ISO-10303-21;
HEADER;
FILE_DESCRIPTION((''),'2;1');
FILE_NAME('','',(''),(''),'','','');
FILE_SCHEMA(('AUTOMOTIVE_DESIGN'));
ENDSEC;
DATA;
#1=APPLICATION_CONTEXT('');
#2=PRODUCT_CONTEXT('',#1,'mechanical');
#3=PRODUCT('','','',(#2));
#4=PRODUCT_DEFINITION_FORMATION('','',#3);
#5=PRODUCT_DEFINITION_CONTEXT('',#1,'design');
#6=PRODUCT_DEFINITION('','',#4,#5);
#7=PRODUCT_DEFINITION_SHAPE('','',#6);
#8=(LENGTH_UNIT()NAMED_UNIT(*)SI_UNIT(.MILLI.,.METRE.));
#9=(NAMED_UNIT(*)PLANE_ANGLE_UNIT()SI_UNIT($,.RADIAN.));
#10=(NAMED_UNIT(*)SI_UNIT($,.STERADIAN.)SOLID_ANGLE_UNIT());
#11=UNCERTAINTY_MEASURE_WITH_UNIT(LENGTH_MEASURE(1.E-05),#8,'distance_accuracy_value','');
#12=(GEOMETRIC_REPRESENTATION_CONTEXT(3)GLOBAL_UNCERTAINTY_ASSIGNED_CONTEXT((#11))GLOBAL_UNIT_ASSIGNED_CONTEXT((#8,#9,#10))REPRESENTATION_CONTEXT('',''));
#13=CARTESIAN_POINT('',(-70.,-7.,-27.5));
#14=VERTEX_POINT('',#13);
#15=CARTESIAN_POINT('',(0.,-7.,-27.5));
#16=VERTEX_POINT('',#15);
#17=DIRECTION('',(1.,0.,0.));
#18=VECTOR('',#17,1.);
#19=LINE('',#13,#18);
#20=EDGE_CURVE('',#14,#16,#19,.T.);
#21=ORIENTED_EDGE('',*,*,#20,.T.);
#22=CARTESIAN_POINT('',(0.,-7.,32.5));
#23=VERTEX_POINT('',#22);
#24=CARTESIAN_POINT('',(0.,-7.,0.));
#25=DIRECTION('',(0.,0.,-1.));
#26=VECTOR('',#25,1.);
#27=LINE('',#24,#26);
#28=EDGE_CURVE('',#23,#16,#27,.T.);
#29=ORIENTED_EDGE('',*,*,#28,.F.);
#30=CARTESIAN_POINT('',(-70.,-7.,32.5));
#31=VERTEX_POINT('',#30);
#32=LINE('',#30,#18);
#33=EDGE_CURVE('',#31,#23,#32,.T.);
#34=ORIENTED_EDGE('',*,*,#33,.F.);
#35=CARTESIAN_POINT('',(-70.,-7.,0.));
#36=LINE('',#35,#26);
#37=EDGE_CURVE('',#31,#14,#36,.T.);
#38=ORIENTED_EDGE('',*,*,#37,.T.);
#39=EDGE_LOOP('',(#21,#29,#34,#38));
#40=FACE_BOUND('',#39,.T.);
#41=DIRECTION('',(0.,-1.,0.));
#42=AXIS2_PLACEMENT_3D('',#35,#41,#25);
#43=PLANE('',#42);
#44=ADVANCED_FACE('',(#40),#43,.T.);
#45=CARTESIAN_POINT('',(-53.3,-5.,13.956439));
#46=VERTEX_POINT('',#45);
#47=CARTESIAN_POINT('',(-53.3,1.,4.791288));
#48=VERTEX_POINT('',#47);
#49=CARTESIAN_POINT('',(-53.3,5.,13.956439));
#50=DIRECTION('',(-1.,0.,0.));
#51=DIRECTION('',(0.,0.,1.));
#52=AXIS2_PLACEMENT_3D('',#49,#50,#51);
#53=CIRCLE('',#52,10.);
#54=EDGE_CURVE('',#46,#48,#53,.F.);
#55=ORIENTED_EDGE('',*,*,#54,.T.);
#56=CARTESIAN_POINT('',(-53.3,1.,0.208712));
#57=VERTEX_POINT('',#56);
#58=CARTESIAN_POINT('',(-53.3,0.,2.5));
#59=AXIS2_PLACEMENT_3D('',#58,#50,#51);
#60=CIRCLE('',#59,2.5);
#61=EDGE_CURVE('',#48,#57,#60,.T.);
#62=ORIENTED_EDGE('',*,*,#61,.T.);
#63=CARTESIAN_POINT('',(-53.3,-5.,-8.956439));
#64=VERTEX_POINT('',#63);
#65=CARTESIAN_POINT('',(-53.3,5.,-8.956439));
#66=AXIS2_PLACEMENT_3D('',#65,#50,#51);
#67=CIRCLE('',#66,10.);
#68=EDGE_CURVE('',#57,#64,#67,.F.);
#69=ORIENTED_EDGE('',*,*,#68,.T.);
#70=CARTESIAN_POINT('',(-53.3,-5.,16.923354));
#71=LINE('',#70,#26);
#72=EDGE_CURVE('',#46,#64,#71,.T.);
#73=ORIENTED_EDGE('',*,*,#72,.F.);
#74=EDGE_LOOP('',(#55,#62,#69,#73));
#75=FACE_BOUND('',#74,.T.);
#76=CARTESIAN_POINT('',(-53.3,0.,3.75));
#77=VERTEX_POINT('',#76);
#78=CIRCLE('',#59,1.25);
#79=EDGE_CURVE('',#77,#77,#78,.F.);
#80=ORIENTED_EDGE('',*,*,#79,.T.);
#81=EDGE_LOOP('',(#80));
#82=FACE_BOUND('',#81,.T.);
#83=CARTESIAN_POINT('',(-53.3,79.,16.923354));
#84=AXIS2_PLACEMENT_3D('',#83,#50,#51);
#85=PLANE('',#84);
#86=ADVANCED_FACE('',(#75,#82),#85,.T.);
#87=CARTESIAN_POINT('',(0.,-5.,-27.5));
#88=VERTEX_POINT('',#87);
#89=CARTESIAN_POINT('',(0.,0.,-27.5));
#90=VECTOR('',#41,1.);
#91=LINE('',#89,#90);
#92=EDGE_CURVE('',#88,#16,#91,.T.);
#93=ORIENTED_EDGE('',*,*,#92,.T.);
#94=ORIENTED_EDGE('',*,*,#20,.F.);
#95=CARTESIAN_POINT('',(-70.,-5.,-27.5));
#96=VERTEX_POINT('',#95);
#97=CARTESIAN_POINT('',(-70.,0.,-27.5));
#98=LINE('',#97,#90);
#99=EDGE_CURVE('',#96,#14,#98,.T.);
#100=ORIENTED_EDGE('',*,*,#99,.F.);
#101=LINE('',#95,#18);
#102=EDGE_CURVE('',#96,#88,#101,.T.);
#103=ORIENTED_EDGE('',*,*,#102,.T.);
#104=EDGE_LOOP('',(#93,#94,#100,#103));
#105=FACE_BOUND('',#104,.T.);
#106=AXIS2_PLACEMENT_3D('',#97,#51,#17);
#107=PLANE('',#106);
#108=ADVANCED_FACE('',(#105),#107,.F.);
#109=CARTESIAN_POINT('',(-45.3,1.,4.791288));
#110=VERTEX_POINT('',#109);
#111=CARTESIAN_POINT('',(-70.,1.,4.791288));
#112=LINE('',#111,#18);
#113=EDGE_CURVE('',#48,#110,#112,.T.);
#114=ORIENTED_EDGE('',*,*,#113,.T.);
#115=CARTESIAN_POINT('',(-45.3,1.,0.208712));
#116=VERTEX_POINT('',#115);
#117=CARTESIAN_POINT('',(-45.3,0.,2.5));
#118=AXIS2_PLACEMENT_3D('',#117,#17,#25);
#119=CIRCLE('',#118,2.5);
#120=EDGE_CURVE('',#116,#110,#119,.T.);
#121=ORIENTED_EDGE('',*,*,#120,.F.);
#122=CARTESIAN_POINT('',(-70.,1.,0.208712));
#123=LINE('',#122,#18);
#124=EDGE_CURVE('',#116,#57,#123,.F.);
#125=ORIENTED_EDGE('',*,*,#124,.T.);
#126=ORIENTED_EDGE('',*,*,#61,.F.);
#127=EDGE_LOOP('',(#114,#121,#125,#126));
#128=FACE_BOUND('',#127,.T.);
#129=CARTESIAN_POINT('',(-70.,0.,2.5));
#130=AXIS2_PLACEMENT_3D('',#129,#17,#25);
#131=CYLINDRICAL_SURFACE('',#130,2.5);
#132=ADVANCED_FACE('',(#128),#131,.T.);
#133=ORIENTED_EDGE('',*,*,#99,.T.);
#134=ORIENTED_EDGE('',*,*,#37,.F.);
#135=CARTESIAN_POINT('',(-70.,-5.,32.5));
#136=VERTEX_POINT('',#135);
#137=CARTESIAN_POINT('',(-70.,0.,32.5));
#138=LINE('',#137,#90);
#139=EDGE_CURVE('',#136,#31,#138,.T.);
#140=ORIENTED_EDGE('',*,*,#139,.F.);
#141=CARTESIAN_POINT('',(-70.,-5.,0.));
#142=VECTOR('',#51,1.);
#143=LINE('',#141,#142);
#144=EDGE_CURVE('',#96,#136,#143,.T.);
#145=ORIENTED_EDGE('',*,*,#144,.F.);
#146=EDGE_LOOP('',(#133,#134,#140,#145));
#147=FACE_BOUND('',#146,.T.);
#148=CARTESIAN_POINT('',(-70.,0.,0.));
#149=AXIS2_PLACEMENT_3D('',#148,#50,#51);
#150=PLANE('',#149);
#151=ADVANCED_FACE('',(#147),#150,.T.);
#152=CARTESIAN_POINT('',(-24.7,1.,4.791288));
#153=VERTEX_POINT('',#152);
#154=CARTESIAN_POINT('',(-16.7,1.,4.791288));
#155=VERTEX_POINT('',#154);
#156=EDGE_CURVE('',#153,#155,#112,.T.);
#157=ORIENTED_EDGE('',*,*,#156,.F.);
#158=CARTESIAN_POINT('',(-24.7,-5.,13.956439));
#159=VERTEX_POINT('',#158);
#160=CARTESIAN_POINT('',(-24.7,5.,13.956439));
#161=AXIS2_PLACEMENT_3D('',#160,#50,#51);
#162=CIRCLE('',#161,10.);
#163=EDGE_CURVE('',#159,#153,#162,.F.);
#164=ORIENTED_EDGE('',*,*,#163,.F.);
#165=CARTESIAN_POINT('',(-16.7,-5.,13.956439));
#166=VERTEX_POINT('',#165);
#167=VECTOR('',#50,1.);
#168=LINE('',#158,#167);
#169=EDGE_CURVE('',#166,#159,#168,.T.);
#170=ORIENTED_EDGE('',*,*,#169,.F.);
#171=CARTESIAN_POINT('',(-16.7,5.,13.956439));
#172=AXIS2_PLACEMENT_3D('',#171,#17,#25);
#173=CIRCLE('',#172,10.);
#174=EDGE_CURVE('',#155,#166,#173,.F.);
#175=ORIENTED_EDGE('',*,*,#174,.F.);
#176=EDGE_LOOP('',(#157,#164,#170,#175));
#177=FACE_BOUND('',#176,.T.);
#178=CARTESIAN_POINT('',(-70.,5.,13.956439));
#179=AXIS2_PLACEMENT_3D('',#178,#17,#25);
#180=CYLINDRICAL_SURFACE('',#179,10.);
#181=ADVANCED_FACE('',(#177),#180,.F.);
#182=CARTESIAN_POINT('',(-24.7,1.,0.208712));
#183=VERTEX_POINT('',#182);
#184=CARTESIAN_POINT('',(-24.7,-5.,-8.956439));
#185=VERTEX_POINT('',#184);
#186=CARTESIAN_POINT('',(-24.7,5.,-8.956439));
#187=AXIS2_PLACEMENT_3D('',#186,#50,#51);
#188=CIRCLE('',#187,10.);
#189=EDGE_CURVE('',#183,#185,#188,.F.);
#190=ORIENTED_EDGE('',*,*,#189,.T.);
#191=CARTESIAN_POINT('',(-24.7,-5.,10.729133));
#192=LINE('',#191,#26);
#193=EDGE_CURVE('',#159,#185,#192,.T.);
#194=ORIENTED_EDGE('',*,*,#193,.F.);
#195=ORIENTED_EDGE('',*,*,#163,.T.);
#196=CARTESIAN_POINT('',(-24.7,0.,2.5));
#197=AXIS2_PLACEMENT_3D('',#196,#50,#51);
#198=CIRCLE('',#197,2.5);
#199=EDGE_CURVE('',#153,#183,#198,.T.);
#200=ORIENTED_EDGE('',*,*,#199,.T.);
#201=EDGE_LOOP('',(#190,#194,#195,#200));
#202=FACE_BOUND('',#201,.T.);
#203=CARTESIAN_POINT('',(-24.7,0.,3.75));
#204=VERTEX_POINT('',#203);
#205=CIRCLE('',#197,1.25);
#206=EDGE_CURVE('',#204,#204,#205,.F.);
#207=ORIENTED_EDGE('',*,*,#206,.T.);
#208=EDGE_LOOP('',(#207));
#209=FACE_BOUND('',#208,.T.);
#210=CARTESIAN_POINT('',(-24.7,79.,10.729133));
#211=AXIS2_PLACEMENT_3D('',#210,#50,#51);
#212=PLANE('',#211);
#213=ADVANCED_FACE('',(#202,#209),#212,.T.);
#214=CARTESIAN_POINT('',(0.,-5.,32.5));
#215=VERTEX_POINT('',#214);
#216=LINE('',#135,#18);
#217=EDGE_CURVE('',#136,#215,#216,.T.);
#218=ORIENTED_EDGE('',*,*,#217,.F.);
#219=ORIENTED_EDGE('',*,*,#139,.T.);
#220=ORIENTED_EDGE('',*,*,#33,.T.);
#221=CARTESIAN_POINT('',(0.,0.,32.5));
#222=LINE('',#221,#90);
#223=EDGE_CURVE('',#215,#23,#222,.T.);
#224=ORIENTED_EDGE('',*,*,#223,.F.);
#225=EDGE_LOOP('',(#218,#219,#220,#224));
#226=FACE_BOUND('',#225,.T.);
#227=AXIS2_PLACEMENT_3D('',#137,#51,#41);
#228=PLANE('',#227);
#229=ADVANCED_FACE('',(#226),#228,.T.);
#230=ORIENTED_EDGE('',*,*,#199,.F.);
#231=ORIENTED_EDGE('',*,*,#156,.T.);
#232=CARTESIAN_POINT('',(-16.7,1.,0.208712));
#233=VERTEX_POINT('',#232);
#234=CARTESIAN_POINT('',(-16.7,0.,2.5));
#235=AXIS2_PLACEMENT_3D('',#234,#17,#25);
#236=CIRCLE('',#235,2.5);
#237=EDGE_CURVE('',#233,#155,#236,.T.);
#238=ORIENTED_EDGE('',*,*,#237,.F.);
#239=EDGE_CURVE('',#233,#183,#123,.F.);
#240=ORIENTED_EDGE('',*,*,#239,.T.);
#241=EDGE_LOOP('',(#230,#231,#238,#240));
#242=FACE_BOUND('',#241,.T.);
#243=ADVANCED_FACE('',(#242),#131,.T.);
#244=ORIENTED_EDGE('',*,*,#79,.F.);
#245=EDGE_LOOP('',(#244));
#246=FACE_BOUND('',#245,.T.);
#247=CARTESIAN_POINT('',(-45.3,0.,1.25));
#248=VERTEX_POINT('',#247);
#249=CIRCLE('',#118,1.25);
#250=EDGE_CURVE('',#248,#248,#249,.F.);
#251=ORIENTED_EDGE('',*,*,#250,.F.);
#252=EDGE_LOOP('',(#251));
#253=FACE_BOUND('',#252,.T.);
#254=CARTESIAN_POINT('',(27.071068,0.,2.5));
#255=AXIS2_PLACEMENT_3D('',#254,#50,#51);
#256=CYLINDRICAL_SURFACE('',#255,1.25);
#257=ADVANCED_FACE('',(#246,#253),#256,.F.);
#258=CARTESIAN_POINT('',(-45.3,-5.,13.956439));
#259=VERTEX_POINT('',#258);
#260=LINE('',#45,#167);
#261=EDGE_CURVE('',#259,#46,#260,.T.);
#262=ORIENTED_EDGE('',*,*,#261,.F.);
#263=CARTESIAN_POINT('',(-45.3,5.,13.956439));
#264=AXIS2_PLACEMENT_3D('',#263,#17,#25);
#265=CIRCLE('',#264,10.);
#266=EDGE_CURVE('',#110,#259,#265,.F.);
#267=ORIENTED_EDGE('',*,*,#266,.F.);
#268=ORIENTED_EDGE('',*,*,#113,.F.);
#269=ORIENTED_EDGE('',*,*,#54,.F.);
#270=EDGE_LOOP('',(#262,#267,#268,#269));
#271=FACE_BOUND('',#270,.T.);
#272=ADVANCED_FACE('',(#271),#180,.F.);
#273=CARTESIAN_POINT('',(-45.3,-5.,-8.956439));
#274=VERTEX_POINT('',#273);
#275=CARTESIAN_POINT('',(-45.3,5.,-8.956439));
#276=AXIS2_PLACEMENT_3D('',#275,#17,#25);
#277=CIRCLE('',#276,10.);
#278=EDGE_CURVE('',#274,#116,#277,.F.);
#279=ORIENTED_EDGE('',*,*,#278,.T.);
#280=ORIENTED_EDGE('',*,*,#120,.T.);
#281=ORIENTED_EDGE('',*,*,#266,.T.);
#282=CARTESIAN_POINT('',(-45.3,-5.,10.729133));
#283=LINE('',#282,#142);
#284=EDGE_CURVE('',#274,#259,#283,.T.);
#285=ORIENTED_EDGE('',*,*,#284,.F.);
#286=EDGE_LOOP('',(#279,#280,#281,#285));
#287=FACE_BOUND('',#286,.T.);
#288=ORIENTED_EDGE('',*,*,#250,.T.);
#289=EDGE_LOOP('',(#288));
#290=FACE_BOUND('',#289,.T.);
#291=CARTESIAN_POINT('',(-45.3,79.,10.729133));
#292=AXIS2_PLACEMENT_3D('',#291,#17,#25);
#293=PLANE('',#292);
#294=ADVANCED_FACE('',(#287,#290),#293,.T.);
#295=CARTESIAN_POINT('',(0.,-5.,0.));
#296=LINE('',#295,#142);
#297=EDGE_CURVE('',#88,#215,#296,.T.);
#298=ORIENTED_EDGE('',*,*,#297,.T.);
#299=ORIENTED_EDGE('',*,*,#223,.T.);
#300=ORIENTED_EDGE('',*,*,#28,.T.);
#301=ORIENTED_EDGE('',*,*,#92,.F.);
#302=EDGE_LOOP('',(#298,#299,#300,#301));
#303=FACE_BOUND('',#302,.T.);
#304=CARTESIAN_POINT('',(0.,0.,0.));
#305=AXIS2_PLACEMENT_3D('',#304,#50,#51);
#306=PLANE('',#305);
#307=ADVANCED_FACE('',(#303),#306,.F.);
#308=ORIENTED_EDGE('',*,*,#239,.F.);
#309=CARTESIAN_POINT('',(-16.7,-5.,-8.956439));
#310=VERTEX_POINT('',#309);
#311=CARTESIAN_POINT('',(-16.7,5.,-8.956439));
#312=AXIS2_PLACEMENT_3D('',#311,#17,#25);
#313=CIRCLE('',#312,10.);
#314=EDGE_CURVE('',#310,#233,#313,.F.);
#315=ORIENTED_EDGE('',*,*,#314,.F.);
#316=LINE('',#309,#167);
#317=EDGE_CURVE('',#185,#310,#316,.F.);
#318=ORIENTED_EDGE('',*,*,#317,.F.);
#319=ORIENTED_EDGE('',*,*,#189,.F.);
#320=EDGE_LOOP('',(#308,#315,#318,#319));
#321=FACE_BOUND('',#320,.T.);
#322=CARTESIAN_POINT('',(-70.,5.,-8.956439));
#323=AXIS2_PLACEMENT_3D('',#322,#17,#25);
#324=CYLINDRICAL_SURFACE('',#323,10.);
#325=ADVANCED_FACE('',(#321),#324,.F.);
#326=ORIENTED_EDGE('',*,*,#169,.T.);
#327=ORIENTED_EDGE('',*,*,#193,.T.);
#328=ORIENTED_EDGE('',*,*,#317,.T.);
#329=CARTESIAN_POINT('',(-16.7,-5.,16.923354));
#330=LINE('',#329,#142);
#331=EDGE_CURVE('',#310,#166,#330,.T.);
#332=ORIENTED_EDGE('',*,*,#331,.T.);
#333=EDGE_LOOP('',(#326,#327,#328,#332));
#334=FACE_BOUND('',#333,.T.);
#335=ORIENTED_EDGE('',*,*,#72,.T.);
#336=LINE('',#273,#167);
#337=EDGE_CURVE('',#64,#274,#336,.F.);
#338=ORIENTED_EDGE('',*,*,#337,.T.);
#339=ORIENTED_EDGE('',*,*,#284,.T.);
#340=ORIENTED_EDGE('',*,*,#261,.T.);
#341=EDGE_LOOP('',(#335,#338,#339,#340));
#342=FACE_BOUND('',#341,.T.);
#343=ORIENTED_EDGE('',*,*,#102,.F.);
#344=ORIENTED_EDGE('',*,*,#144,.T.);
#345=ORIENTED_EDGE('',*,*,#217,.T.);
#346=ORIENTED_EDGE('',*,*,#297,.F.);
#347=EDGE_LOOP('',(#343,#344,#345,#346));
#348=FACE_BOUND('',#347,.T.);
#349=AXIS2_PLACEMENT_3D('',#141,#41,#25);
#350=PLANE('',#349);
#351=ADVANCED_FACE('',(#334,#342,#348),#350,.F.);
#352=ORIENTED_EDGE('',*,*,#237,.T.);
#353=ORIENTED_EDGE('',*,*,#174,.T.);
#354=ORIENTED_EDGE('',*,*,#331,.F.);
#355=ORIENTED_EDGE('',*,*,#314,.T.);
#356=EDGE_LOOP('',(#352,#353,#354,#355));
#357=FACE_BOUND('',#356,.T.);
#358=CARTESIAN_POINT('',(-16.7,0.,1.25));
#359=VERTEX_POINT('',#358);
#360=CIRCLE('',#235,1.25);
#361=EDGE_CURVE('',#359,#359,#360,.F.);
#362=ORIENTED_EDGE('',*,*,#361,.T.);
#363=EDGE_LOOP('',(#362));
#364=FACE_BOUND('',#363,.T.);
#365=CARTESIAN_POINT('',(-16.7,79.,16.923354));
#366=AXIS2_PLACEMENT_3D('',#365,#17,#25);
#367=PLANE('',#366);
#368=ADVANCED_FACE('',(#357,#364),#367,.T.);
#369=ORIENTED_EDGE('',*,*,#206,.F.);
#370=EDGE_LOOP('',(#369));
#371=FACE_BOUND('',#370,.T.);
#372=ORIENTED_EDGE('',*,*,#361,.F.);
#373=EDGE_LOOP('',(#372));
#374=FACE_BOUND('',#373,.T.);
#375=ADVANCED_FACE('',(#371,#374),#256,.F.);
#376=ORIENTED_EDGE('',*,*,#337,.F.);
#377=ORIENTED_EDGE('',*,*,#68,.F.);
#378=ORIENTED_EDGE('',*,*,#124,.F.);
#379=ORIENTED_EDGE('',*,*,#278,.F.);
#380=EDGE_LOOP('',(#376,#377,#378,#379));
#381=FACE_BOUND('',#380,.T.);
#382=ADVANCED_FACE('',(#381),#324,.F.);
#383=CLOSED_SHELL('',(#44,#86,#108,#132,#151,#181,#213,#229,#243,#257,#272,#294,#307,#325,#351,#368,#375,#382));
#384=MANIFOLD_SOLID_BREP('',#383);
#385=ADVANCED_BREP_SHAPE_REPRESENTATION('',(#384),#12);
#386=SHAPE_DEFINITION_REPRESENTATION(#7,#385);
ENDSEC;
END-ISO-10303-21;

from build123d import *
from build123d.topology import SkipClean

# Parameters (mm, degrees)
SKETCH1_W           = 20
SKETCH1_H           = 60
BOSS_EXTRUDE1_DEPTH = 5
SKETCH2_R           = 2.5
SKETCH2_R_2         = 1.25
BOSS_EXTRUDE2_DEPTH = 20
CUT_EXTRUDE1_START  = -29
SKETCH3_R           = 1.25
CUT_EXTRUDE1_DEPTH  = 29
SKETCH4_R           = 2.5
SKETCH4_R_2         = 1.25
BOSS_EXTRUDE3_DEPTH = 20
CUT_EXTRUDE2_START  = -29
SKETCH5_R           = 1.25
CUT_EXTRUDE2_DEPTH  = 29
BOSS_EXTRUDE4_START = 70
SKETCH7_R           = 1.25
BOSS_EXTRUDE4_DEPTH = 70
SKETCH8_W           = 20.6
SKETCH8_H           = 18.256228475
SKETCH8_W_2         = 16.7
SKETCH8_H_2         = 28.46865204
SKETCH8_H_3         = 26.746757763
CUT_EXTRUDE4_DEPTH  = 84
SKETCH9_W           = 45.88716948
SKETCH9_H           = 69.445914147
CUT_EXTRUDE5_DEPTH  = 115
FILLET1_R           = 10


with BuildPart() as part:
    # Sketch1 → Boss-Extrude1 (new body)
    with BuildSketch(Plane.XY):
        with Locations((10, 30)):
            Rectangle(SKETCH1_W, SKETCH1_H)
    extrude(amount=BOSS_EXTRUDE1_DEPTH)

    # Sketch2 → Boss-Extrude2 (add)
    with BuildSketch(Plane(origin=(20, 0, 0), x_dir=(0, 0, -1), z_dir=(1, 0, 0))):
        with Locations((-2.5, 60)):
            Circle(SKETCH2_R)
        with Locations((-2.5, 60)):
            Circle(SKETCH2_R_2, mode=Mode.SUBTRACT)
    extrude(amount=-BOSS_EXTRUDE2_DEPTH)

    # Sketch3 → Cut-Extrude1 (cut)
    with SkipClean():  # the faces are left unmerged after this step: merging them gives an invalid solid
        with BuildSketch(Plane.ZY.offset(CUT_EXTRUDE1_START)):
            with Locations(Location((2.5, 60, 0), (0, 0, 180))):
                Circle(SKETCH3_R)
        extrude(amount=CUT_EXTRUDE1_DEPTH, mode=Mode.SUBTRACT)

    # Sketch4 → Boss-Extrude3 (add)
    with BuildSketch(Plane.ZY):
        with Locations((2.5, 0)):
            Circle(SKETCH4_R)
        with Locations((2.5, 0)):
            Circle(SKETCH4_R_2, mode=Mode.SUBTRACT)
    extrude(amount=-BOSS_EXTRUDE3_DEPTH)

    # Sketch5 → Cut-Extrude2 (cut)
    with SkipClean():  # the faces are left unmerged after this step: merging them gives an invalid solid
        with BuildSketch(Plane(origin=(20, 0, 0), x_dir=(0, 0, -1), z_dir=(1, 0, 0)).offset(CUT_EXTRUDE2_START)):
            with Locations(Location((-2.5, 0, 0), (0, 0, 180))):
                Circle(SKETCH5_R)
        extrude(amount=CUT_EXTRUDE2_DEPTH, mode=Mode.SUBTRACT)

    # Sketch7 → Boss-Extrude4 (add)
    # profile 1 of 2: a face of its own
    with SkipClean():  # the faces are left unmerged after this step: merging them gives an invalid solid
        with BuildSketch(Plane.ZY.offset(BOSS_EXTRUDE4_START)):
            with BuildLine():
                Line((0, -5), (-27.5, -5))
                Line((-27.5, -5), (-27.5, -7))
                Line((-27.5, -7), (32.5, -7))
                Line((32.5, -7), (32.5, -5))
                Line((32.5, -5), (5, -5))
                Line((5, -5), (5, 0))
                ThreePointArc((5, 0), (2.5, -2.5), (0, 0))
                Line((0, 0), (0, -5))
            make_face()
        # profile 2 of 2: a face of its own
        with BuildSketch(Plane.ZY.offset(BOSS_EXTRUDE4_START)):
            with BuildLine():
                ThreePointArc((5, 0), (2.5, 2.5), (0, 0))
                ThreePointArc((0, 0), (2.5, -2.5), (5, 0))
            make_face()
            with Locations((2.5, 0)):
                Circle(SKETCH7_R, mode=Mode.SUBTRACT)
        extrude(amount=-BOSS_EXTRUDE4_DEPTH)

    # Sketch8 → Cut-Extrude4 (cut)
    with SkipClean():  # the faces are left unmerged after this step: merging them gives an invalid solid
        with BuildSketch(Plane(origin=(0, -5, 0), x_dir=(1, 0, 0), z_dir=(0, 1, 0))):
            with Locations((-35, -1.601019052)):
                Rectangle(SKETCH8_W, SKETCH8_H)
            with Locations((-8.35, -2.689028032)):
                Rectangle(SKETCH8_W_2, SKETCH8_H_2)
            with Locations((-61.65, -3.54997517)):
                Rectangle(SKETCH8_W_2, SKETCH8_H_3)
        extrude(amount=CUT_EXTRUDE4_DEPTH, mode=Mode.SUBTRACT)


with BuildPart() as cut_extrude4_piece_1:
    # of the separate pieces the step leaves, piece 1, a body of its own (cut_extrude4_pieces)
    add(part.part.solids().sort_by_distance((0, -5, 0))[0])

    # Fillet1
    # the kernel refuses this fillet: 10 mm, written as the material it adds along each edge
    with BuildSketch(Plane(origin=(-47.091098093, -5, 5), x_dir=(0, 0, 1), z_dir=(1, 0, 0))) as fillet1_piece_1_section:
        with BuildLine():
            CenterArc((8.956439237, -10), FILLET1_R, 90, 66.421821522)
            Line((-0.208712153, -6), (-1.125227292, -5.6))
            ThreePointArc((-1.125227292, -5.6), (-1, -5), (-1, 0))
            Line((-1, 0), (0, 1))
            Line((0, 1), (8.956439237, 1))
            Line((8.956439237, 1), (8.956439237, 0))
        make_face()
    fillet1_piece_1 = extrude(amount=30.391098093, mode=Mode.PRIVATE)
    fillet1_piece_1 = split(fillet1_piece_1, bisect_by=Plane(origin=(-45.3, -3.872690531, 7.347841943), z_dir=(-1, 0, 0)), keep=Keep.TOP, mode=Mode.PRIVATE)
    add(fillet1_piece_1)
    with BuildSketch(Plane(origin=(-24.7, -5, 5), x_dir=(0, 0, 1), z_dir=(1, 0, 0)), Plane(origin=(-53.3, -5, 5), x_dir=(0, 0, 1), z_dir=(1, 0, 0))) as fillet1_piece_2:
        with BuildLine():
            CenterArc((8.956439237, -10), FILLET1_R, 90, 66.421821522)
            Line((-0.208712153, -6), (-1.125227292, -5.6))
            ThreePointArc((-1.125227292, -5.6), (-1, -5), (-1, 0))
            Line((-1, 0), (0, 1))
            Line((0, 1), (8.956439237, 1))
            Line((8.956439237, 1), (8.956439237, 0))
        make_face()
    extrude(amount=8)
    with BuildSketch(Plane(origin=(-53.3, -5, 5), x_dir=(0, 0, 1), z_dir=(1, 0, 0))) as fillet1_piece_3_section:
        with BuildLine():
            CenterArc((8.956439237, -10), FILLET1_R, 90, 66.421821522)
            Line((-0.208712153, -6), (-1.125227292, -5.6))
            ThreePointArc((-1.125227292, -5.6), (-1, -5), (-1, 0))
            Line((-1, 0), (0, 1))
            Line((0, 1), (8.956439237, 1))
            Line((8.956439237, 1), (8.956439237, 0))
        make_face()
    fillet1_piece_3 = extrude(amount=30.391098093, mode=Mode.PRIVATE)
    fillet1_piece_3 = split(fillet1_piece_3, bisect_by=Plane(origin=(-24.7, -3.872690531, 7.347841943), z_dir=(1, 0, 0)), keep=Keep.TOP, mode=Mode.PRIVATE)
    add(fillet1_piece_3)
    with BuildSketch(Plane(origin=(-53.3, -5, 0), x_dir=(0, 0, -1), z_dir=(1, 0, 0)), Plane(origin=(-24.7, -5, 0), x_dir=(0, 0, -1), z_dir=(1, 0, 0))) as fillet1_piece_4:
        with BuildLine():
            CenterArc((8.956439237, 10), FILLET1_R, 203.578178478, 66.421821522)
            Line((-0.208712153, 6), (-1.125227292, 5.6))
            ThreePointArc((-1.125227292, 5.6), (-1, 5), (-1, 0))
            Line((-1, 0), (0, -1))
            Line((0, -1), (8.956439237, -1))
            Line((8.956439237, -1), (8.956439237, 0))
        make_face()
    extrude(amount=8)
    with BuildSketch(Plane(origin=(-53.3, -5, 0), x_dir=(0, 0, -1), z_dir=(1, 0, 0))) as fillet1_piece_5_section:
        with BuildLine():
            CenterArc((8.956439237, 10), FILLET1_R, 203.578178478, 66.421821522)
            Line((-0.208712153, 6), (-1.125227292, 5.6))
            ThreePointArc((-1.125227292, 5.6), (-1, 5), (-1, 0))
            Line((-1, 0), (0, -1))
            Line((0, -1), (8.956439237, -1))
            Line((8.956439237, -1), (8.956439237, 0))
        make_face()
    fillet1_piece_5 = extrude(amount=30.391098093, mode=Mode.PRIVATE)
    fillet1_piece_5 = split(fillet1_piece_5, bisect_by=Plane(origin=(-24.7, -3.872690531, -2.347841943), z_dir=(1, 0, 0)), keep=Keep.TOP, mode=Mode.PRIVATE)
    add(fillet1_piece_5)
    with BuildSketch(Plane(origin=(-47.091098093, -5, 0), x_dir=(0, 0, -1), z_dir=(1, 0, 0))) as fillet1_piece_6_section:
        with BuildLine():
            CenterArc((8.956439237, 10), FILLET1_R, 203.578178478, 66.421821522)
            Line((-0.208712153, 6), (-1.125227292, 5.6))
            ThreePointArc((-1.125227292, 5.6), (-1, 5), (-1, 0))
            Line((-1, 0), (0, -1))
            Line((0, -1), (8.956439237, -1))
            Line((8.956439237, -1), (8.956439237, 0))
        make_face()
    fillet1_piece_6 = extrude(amount=30.391098093, mode=Mode.PRIVATE)
    fillet1_piece_6 = split(fillet1_piece_6, bisect_by=Plane(origin=(-45.3, -3.872690531, -2.347841943), z_dir=(-1, 0, 0)), keep=Keep.TOP, mode=Mode.PRIVATE)
    add(fillet1_piece_6)


with BuildPart() as cut_extrude4_piece_2:
    # of the separate pieces the step leaves, piece 2, a body of its own (cut_extrude4_pieces)
    add(part.part.solids().sort_by_distance((20, 0, 0))[0])

    # Sketch9 → Cut-Extrude5 (cut)
    with BuildSketch(Plane(origin=(-16.7, 0, 0), x_dir=(0, 0, -1), z_dir=(1, 0, 0))):
        with Locations((-3.398393378, 29.722957074)):
            Rectangle(SKETCH9_W, SKETCH9_H)
    extrude(amount=CUT_EXTRUDE5_DEPTH, mode=Mode.SUBTRACT)


solid = cut_extrude4_piece_1.part
